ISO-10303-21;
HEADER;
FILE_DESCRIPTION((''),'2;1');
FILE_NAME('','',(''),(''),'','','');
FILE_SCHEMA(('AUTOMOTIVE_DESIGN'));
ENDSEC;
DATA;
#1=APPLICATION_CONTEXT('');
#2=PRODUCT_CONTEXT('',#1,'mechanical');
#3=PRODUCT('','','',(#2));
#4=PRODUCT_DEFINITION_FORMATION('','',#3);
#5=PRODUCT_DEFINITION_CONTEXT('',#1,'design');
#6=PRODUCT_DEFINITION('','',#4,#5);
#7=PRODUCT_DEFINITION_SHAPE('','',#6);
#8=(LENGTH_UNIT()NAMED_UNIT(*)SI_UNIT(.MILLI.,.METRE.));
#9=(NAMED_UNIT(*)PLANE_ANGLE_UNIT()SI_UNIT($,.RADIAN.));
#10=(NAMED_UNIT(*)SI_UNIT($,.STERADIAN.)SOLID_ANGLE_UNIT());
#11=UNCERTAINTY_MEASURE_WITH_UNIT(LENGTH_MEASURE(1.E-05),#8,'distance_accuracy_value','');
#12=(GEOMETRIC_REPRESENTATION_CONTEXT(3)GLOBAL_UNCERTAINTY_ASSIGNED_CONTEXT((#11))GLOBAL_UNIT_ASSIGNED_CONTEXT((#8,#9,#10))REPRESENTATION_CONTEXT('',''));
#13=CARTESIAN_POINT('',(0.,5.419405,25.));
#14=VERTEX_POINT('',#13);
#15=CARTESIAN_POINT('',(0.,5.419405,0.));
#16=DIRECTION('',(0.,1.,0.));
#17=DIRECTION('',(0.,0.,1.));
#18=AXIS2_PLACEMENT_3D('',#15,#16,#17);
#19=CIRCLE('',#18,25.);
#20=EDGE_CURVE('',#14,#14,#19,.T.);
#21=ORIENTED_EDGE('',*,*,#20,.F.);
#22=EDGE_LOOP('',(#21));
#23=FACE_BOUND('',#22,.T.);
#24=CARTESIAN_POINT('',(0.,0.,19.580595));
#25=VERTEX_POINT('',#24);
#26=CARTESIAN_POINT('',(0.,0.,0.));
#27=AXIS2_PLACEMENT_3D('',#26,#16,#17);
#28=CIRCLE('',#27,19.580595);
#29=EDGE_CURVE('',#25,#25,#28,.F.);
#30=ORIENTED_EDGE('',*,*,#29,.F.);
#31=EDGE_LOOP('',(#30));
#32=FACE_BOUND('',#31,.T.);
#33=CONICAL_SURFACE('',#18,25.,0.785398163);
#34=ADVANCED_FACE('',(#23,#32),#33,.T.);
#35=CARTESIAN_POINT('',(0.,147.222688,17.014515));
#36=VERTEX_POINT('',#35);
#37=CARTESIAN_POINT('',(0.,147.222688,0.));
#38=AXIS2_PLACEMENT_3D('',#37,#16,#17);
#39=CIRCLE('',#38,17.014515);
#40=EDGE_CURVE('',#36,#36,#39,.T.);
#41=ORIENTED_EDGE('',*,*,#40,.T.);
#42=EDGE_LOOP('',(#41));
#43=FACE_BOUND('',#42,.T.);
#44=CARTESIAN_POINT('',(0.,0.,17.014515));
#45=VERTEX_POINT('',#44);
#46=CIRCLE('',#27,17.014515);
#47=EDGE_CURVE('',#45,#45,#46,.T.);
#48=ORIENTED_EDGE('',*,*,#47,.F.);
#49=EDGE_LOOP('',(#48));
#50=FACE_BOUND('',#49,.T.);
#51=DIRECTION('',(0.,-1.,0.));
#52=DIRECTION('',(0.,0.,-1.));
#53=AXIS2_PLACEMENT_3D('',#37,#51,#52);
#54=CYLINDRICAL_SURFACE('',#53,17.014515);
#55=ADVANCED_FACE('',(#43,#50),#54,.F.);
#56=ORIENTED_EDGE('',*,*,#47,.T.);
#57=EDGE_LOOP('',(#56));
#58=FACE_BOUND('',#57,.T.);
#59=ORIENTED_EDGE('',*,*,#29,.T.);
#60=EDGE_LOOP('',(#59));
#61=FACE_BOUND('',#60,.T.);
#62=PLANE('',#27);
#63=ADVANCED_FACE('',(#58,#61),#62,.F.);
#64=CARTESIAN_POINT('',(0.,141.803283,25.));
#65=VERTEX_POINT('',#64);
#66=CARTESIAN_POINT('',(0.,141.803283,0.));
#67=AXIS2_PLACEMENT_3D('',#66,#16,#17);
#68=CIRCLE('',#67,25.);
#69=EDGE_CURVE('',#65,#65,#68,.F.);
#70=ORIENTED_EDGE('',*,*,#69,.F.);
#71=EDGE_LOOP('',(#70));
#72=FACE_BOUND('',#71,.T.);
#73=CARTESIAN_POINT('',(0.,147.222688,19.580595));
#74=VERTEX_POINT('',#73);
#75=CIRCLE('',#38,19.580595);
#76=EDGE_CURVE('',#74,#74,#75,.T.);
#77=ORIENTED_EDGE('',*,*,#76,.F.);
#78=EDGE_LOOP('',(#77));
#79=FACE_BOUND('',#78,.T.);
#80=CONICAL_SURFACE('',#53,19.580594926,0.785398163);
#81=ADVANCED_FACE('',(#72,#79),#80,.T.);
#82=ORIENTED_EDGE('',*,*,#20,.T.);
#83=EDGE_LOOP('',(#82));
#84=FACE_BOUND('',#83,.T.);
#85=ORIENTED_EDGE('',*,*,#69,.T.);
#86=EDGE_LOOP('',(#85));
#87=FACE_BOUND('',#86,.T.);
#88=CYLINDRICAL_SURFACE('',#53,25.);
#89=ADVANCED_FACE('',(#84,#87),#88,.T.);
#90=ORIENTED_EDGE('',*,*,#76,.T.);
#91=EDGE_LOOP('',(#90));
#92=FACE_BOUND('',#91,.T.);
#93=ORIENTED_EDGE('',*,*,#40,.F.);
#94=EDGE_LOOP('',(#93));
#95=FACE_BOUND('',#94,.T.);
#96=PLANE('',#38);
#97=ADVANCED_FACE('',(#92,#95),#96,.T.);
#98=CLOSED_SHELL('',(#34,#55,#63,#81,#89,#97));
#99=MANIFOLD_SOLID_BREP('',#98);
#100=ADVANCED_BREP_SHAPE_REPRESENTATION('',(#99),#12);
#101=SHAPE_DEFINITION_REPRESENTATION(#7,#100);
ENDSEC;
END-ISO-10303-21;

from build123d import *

# Parameters (mm, degrees)
SKETCH1_R           = 25
BOSS_EXTRUDE1_DEPTH = 147.222688113
SKETCH2_R           = 17.014514558
CUT_EXTRUDE1_DEPTH  = 152.408453843
CHAMFER1_SIZE       = 5.419405074


with BuildPart() as part:
    # Sketch1 → Boss-Extrude1 (new body)
    with BuildSketch(Plane(origin=(0, 0, 0), x_dir=(1, 0, 0), z_dir=(0, 1, 0))):
        Circle(SKETCH1_R)
    extrude(amount=BOSS_EXTRUDE1_DEPTH)

    # Sketch2 → Cut-Extrude1 (cut, through all)
    with BuildSketch(Plane(origin=(0, 0, 0), x_dir=(1, 0, 0), z_dir=(0, 1, 0))):
        Circle(SKETCH2_R)
    extrude(amount=CUT_EXTRUDE1_DEPTH, mode=Mode.SUBTRACT)

    # Chamfer1
    chamfer1_edges = [part.edges().sort_by_distance(p)[0] for p in [
        (-25, 147.222688113, 0),
        (-25, 0, 0),
    ]]
    chamfer(chamfer1_edges, length=CHAMFER1_SIZE)


solid = part.part
